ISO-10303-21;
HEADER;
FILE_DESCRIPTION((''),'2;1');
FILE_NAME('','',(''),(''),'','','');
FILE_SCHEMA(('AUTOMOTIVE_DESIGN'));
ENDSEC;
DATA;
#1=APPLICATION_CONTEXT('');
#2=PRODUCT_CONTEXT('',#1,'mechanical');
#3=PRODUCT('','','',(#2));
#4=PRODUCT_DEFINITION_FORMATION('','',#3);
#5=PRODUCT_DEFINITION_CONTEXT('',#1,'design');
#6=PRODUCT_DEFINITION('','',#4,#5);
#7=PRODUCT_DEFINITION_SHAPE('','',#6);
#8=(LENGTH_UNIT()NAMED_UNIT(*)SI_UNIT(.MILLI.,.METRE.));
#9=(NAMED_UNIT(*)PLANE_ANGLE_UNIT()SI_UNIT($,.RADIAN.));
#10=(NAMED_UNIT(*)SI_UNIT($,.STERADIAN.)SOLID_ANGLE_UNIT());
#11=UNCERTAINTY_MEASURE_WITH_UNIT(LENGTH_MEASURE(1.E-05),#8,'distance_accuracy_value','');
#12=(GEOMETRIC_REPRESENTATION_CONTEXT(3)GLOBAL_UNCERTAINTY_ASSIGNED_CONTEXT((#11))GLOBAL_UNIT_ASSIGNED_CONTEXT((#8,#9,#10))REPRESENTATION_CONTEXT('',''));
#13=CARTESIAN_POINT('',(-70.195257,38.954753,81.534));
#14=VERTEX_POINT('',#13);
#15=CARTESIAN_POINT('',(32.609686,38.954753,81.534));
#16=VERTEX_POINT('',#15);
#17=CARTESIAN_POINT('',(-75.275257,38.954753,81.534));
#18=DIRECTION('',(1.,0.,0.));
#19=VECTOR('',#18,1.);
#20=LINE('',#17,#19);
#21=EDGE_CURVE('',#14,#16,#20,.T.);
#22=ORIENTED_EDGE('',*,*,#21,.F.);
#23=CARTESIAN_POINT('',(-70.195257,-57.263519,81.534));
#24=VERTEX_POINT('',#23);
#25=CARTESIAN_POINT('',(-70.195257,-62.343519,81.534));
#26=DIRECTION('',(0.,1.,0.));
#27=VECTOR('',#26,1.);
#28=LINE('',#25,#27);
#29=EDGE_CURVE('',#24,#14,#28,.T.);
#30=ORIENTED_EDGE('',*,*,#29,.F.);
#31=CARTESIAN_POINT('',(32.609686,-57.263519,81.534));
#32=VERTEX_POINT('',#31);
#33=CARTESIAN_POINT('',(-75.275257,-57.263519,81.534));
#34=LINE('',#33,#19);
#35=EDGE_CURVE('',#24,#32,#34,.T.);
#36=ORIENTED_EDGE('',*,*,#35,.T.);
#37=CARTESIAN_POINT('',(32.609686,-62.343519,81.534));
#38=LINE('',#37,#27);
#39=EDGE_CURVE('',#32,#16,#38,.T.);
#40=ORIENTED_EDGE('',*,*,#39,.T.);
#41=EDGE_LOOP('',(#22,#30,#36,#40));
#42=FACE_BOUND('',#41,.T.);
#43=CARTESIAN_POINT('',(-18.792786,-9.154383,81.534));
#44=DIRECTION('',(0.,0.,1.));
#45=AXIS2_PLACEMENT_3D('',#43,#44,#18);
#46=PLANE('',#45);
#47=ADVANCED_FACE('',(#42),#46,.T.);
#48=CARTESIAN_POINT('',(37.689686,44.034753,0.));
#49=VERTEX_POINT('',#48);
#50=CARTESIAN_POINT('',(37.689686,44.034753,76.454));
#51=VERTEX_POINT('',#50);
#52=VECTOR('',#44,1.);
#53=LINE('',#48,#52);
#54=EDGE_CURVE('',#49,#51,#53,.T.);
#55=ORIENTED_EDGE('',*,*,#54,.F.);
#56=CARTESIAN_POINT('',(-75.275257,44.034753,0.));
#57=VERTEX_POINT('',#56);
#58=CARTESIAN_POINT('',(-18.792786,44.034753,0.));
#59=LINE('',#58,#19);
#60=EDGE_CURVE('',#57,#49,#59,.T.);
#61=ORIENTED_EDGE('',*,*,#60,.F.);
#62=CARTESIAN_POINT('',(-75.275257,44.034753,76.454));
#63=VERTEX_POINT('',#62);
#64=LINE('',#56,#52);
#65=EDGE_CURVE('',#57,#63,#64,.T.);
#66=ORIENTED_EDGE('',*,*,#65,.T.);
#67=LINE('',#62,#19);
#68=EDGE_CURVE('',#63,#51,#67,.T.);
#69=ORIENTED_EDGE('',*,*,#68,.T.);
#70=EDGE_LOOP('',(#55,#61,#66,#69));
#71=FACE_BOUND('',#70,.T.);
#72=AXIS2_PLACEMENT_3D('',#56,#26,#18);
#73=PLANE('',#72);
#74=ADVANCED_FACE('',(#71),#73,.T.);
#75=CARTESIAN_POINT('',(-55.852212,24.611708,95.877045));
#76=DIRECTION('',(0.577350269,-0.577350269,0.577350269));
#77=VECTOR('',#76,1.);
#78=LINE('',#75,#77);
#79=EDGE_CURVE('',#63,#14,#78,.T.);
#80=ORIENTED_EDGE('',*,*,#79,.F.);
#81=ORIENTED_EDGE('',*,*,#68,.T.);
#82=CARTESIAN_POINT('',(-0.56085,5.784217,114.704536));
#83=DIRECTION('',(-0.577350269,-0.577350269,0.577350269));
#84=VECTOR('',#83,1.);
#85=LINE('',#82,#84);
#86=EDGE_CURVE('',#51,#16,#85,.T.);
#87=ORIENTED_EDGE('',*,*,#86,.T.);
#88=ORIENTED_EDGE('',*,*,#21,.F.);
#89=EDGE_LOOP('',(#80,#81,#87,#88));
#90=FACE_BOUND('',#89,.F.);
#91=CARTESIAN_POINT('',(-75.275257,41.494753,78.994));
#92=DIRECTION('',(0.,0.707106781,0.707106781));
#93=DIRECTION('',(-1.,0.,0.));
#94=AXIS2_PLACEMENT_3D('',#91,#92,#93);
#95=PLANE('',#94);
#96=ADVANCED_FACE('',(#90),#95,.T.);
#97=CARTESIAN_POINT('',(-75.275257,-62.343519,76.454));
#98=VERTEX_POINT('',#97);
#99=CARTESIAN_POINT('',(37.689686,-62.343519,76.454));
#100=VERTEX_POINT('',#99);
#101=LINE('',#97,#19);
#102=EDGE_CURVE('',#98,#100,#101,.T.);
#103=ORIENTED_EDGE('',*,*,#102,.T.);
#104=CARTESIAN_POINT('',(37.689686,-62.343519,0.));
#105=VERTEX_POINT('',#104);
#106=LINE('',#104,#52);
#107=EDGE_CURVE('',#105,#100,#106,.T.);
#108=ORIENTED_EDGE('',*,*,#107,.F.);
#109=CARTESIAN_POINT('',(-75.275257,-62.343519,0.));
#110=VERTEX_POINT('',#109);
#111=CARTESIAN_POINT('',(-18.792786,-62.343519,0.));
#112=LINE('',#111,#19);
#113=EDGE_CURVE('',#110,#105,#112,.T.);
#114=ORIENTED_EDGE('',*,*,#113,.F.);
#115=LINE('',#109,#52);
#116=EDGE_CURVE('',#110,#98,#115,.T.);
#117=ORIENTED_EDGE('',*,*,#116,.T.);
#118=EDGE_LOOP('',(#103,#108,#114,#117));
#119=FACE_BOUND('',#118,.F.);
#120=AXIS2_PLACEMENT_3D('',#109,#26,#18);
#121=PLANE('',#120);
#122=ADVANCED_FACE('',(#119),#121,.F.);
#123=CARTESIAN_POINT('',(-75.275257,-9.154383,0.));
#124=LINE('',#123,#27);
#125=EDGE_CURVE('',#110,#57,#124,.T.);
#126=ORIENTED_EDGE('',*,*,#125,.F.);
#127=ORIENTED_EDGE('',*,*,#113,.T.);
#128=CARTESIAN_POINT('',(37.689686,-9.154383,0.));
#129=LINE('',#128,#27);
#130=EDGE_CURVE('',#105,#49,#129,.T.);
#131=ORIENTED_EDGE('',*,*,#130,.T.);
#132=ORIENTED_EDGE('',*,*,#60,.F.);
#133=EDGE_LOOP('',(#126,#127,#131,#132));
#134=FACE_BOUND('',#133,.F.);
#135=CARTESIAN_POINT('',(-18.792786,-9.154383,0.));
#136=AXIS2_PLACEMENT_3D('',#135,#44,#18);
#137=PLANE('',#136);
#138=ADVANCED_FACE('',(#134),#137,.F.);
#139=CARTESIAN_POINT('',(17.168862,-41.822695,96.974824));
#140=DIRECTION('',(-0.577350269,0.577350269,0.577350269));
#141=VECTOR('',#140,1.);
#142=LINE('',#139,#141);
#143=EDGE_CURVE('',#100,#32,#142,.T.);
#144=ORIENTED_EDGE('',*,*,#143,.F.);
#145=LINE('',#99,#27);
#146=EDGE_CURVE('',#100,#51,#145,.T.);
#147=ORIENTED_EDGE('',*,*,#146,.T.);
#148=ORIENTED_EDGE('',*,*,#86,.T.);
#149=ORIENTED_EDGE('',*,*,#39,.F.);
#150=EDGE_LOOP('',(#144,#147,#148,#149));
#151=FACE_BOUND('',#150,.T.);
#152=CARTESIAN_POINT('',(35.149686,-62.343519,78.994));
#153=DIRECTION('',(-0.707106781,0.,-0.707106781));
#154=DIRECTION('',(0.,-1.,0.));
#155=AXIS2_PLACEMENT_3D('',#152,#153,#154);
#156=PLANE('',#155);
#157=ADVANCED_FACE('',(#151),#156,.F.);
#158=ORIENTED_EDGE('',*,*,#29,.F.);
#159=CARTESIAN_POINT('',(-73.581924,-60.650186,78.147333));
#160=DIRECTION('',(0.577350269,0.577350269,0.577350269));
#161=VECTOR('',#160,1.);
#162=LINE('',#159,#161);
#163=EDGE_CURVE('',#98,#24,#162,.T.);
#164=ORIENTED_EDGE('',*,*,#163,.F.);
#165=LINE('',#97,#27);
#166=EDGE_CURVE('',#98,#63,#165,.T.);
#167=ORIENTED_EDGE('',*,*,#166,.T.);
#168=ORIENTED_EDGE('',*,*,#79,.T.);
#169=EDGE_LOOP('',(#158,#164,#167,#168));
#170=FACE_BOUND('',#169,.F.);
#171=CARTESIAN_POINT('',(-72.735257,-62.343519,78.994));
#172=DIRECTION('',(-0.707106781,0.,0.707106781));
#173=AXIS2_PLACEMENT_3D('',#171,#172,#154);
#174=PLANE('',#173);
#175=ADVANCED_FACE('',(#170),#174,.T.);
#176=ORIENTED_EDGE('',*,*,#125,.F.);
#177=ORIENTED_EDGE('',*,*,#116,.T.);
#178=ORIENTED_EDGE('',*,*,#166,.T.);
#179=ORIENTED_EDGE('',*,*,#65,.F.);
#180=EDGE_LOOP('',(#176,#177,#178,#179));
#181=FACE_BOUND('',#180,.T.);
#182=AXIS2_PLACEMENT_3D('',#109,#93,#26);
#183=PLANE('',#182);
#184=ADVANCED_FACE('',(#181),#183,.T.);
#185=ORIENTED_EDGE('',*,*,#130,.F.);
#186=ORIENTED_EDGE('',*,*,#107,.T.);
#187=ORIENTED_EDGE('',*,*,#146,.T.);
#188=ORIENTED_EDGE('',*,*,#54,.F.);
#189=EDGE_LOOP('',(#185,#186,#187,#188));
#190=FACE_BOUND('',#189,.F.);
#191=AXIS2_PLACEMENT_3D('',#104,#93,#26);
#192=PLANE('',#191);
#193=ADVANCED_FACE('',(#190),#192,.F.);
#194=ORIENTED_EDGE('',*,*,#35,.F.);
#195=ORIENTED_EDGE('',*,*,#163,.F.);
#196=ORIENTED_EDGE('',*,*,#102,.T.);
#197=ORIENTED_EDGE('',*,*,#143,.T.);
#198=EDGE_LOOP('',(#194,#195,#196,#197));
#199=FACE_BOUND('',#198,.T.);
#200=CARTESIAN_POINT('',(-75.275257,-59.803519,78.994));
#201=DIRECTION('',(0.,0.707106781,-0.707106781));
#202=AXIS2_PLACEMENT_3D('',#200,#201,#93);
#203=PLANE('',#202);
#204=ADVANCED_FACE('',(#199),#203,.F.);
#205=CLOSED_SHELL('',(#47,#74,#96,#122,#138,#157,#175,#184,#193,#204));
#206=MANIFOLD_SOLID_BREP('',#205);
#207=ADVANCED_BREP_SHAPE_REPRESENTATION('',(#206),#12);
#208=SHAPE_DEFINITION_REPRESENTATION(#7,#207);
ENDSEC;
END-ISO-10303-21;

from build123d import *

# Parameters (mm, degrees)
F0_W     = 112.9649430513
F0_H     = 106.3782721758
F1_DEPTH = 81.534
F2_SIZE  = 5.08


# Not quite as in the source:
# - a feature of the source that left no trace in its solid (it failed there, or was rolled back) is left out


with BuildPart() as f1:
    # F0 (on Top) → F1 (new body)
    with BuildSketch(Plane.XY):
        with Locations((-18.7927857041, -9.1543830931)):
            Rectangle(F0_W, F0_H)
    extrude(amount=F1_DEPTH)

    # F2
    f2_edges = [f1.edges().sort_by_distance(p)[0] for p in [
        (-18.792786, 44.034753, 81.534),
        (-75.275257, -9.154383, 81.534),
        (-18.792786, -62.343519, 81.534),
        (37.689686, -9.154383, 81.534),
    ]]
    chamfer(f2_edges, length=F2_SIZE)


solid = f1.part
